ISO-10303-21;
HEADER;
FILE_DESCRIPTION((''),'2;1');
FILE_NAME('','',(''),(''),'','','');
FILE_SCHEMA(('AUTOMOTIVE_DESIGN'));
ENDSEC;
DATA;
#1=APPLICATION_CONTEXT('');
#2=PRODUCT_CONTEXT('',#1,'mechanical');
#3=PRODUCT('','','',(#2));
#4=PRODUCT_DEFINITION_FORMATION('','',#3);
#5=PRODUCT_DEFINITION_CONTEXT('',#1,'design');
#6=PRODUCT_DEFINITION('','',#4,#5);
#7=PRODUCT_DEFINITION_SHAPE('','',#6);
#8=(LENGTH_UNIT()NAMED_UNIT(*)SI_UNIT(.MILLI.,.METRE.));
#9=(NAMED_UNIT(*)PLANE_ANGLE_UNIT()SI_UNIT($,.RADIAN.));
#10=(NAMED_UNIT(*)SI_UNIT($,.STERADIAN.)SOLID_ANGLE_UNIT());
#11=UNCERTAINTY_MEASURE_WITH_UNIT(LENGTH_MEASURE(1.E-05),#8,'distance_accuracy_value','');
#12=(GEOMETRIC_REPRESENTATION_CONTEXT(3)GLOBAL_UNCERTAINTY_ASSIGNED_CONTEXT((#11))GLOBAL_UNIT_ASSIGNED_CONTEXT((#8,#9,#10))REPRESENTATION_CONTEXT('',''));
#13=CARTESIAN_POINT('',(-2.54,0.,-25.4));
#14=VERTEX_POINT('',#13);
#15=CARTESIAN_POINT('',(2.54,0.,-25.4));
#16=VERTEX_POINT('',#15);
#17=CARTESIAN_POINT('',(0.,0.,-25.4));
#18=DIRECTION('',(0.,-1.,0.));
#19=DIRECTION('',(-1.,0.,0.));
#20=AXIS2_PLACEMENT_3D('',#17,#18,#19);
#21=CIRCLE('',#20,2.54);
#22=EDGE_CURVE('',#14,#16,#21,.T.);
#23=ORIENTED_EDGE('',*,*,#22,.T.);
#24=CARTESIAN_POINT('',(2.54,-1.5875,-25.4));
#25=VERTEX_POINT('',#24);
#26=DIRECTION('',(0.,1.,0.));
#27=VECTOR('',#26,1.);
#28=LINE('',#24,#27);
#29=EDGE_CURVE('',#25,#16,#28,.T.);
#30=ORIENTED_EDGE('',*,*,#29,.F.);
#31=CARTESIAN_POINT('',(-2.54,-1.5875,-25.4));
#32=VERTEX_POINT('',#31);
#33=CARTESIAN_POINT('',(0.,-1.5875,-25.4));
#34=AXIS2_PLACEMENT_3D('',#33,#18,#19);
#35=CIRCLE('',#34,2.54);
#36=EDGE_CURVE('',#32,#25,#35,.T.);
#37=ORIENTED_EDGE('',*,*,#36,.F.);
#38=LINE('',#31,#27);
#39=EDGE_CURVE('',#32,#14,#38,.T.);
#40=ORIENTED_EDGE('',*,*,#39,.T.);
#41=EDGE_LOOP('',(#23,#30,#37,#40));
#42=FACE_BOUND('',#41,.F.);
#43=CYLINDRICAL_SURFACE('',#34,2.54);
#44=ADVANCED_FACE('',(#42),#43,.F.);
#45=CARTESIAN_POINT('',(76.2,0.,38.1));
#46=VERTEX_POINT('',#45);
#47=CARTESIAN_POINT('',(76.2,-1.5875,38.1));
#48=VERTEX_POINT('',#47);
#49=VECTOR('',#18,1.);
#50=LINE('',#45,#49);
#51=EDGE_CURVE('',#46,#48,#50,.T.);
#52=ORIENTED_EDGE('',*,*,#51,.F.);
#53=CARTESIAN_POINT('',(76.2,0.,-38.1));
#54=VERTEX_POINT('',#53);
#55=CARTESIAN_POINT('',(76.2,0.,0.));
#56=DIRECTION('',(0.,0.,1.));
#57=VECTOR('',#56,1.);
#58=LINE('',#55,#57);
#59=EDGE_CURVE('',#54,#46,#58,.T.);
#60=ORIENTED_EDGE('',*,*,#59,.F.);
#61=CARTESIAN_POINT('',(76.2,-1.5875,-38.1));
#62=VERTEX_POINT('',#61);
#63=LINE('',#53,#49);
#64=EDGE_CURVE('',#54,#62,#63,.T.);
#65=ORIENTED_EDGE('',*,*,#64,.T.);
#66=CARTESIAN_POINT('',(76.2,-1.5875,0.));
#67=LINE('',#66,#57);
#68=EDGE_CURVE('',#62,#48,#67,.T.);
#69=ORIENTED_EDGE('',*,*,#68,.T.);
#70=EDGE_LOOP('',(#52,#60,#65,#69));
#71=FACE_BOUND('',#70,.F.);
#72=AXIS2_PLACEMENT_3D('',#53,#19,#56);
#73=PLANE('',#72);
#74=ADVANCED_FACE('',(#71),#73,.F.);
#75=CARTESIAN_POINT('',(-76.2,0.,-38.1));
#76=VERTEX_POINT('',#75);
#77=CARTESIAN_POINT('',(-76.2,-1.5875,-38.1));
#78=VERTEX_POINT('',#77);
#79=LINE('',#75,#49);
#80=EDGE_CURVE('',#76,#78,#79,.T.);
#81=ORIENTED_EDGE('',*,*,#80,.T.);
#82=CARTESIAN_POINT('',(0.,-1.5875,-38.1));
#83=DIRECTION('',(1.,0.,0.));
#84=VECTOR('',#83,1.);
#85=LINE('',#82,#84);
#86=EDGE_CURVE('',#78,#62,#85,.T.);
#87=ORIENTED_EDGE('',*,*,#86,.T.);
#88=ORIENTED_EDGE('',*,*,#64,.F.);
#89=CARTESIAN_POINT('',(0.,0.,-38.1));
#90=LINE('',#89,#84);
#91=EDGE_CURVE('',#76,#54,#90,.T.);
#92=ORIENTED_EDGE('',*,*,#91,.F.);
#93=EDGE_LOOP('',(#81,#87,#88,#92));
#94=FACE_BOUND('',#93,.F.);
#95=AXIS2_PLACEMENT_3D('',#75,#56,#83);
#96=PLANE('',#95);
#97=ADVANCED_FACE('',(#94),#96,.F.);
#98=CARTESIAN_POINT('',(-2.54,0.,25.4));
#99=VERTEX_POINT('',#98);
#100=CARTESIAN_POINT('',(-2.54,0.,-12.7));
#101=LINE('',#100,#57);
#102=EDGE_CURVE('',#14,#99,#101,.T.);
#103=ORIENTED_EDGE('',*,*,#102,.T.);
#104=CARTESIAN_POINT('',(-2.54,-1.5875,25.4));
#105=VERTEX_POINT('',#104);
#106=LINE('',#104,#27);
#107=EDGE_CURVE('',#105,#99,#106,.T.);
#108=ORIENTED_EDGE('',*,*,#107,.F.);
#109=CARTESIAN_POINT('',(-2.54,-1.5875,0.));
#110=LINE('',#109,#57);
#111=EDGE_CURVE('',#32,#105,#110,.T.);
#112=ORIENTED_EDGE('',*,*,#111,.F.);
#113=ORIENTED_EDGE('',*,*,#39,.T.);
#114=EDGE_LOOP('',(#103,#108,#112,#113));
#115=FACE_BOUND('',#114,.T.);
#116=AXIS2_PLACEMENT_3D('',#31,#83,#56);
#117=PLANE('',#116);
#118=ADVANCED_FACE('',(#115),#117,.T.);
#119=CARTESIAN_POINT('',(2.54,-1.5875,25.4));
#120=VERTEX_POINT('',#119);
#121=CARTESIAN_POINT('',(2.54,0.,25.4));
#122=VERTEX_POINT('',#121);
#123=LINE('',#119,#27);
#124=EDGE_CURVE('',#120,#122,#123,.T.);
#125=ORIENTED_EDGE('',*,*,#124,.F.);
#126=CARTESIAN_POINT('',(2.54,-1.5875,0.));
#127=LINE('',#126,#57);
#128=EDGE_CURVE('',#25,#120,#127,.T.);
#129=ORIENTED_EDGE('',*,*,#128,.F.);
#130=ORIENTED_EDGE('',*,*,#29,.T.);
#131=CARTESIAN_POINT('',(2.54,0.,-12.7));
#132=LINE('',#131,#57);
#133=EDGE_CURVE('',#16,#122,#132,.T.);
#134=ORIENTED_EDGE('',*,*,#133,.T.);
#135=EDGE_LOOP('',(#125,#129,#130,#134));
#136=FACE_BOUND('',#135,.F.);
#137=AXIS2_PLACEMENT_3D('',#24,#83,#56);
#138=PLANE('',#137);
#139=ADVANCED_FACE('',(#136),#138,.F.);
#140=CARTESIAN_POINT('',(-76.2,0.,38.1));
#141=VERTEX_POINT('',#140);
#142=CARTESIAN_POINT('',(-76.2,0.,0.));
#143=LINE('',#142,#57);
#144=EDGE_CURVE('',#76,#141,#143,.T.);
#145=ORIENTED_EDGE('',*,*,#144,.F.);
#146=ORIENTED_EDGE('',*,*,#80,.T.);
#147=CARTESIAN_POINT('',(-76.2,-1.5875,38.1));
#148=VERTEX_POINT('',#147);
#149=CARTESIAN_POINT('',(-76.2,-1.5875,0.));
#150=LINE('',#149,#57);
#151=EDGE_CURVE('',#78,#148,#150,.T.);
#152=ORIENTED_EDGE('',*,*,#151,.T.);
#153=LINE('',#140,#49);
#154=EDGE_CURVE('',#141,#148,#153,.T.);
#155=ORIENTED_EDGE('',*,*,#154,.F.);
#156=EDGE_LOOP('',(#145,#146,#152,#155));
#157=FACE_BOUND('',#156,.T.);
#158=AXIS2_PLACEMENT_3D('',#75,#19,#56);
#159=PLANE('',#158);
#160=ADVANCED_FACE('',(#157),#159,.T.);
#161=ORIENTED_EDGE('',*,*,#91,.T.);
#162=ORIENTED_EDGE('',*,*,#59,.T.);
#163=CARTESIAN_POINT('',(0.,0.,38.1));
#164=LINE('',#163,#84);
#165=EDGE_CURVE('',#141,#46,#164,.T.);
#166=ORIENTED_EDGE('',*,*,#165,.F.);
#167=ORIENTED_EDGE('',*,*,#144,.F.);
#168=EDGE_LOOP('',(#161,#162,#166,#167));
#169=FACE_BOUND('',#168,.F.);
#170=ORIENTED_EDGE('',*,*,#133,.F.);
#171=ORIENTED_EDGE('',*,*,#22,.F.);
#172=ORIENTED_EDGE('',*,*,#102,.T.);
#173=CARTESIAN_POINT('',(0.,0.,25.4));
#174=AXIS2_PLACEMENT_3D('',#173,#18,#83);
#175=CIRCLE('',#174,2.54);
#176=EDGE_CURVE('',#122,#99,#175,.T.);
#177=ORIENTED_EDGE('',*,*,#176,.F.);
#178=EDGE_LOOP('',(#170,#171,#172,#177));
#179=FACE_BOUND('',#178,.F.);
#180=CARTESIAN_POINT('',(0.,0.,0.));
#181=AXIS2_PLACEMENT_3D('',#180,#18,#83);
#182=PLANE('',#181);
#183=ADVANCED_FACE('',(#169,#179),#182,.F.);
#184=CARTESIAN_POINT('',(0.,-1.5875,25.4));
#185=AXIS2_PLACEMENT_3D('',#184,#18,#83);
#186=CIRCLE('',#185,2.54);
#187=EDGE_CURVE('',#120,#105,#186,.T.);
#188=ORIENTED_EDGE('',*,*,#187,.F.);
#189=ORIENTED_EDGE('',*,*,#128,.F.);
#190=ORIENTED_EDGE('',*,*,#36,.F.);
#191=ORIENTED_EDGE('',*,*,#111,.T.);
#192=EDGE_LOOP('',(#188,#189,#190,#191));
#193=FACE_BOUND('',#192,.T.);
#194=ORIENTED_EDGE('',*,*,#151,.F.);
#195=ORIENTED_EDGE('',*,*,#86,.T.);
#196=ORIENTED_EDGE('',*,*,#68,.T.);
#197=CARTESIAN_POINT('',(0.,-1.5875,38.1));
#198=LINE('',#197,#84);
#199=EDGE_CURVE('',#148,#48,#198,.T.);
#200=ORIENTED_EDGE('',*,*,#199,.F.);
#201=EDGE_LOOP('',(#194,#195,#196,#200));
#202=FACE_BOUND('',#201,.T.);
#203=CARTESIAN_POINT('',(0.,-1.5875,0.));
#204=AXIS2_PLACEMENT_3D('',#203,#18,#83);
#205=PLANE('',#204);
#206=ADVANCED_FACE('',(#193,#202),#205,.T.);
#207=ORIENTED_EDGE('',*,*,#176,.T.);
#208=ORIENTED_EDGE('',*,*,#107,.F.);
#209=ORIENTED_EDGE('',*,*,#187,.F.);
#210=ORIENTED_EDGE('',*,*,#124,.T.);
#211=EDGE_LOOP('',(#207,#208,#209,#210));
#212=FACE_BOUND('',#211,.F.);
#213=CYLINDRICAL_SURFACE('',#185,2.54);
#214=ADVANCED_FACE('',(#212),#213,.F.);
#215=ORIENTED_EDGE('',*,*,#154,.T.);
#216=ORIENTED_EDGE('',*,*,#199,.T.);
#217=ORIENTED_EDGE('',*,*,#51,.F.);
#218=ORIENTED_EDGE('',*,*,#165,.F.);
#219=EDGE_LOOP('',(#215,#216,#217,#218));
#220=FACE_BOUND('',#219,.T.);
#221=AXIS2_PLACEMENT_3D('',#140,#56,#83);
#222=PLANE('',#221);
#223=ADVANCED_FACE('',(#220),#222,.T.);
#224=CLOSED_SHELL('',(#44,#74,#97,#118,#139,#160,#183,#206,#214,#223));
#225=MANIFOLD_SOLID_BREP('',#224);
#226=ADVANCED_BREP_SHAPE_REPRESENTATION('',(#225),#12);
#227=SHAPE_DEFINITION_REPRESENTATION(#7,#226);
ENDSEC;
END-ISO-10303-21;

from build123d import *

# Parameters (mm, degrees)
F0_W     = 152.4
F0_H     = 76.2
F1_DEPTH = 1.5875
F2_W     = 5.08
F2_H     = 50.8
F3_DEPTH = 25.4
F5_DEPTH = 25.4


# Not quite as in the source:
# - a length typed as a fraction of an inch, garbled in the dataset ("3 / 203.2 mm" for 3/8 in), is restored


with BuildPart() as f1:
    # F0 (on Front) → F1 (new body)
    with BuildSketch(Plane.XZ):
        Rectangle(F0_W, F0_H)
    extrude(amount=F1_DEPTH)

    # F2 (on face) → F3 (cut)
    with BuildSketch(Plane.XZ.offset(1.5875)):
        Rectangle(F2_W, F2_H)
    extrude(amount=-F3_DEPTH, mode=Mode.SUBTRACT)

    # F4 (on face) → F5 (cut)
    with BuildSketch(Plane.XZ.offset(1.5875)):
        with BuildLine():
            Line((2.54, -25.4), (-2.54, -25.4))
            ThreePointArc((-2.54, -25.4), (0, -27.94), (2.54, -25.4))
        make_face()
        with BuildLine():
            ThreePointArc((2.54, 25.4), (0, 27.94), (-2.54, 25.4))
            Line((-2.54, 25.4), (2.54, 25.4))
        make_face()
    extrude(amount=-F5_DEPTH, mode=Mode.SUBTRACT)


solid = f1.part
